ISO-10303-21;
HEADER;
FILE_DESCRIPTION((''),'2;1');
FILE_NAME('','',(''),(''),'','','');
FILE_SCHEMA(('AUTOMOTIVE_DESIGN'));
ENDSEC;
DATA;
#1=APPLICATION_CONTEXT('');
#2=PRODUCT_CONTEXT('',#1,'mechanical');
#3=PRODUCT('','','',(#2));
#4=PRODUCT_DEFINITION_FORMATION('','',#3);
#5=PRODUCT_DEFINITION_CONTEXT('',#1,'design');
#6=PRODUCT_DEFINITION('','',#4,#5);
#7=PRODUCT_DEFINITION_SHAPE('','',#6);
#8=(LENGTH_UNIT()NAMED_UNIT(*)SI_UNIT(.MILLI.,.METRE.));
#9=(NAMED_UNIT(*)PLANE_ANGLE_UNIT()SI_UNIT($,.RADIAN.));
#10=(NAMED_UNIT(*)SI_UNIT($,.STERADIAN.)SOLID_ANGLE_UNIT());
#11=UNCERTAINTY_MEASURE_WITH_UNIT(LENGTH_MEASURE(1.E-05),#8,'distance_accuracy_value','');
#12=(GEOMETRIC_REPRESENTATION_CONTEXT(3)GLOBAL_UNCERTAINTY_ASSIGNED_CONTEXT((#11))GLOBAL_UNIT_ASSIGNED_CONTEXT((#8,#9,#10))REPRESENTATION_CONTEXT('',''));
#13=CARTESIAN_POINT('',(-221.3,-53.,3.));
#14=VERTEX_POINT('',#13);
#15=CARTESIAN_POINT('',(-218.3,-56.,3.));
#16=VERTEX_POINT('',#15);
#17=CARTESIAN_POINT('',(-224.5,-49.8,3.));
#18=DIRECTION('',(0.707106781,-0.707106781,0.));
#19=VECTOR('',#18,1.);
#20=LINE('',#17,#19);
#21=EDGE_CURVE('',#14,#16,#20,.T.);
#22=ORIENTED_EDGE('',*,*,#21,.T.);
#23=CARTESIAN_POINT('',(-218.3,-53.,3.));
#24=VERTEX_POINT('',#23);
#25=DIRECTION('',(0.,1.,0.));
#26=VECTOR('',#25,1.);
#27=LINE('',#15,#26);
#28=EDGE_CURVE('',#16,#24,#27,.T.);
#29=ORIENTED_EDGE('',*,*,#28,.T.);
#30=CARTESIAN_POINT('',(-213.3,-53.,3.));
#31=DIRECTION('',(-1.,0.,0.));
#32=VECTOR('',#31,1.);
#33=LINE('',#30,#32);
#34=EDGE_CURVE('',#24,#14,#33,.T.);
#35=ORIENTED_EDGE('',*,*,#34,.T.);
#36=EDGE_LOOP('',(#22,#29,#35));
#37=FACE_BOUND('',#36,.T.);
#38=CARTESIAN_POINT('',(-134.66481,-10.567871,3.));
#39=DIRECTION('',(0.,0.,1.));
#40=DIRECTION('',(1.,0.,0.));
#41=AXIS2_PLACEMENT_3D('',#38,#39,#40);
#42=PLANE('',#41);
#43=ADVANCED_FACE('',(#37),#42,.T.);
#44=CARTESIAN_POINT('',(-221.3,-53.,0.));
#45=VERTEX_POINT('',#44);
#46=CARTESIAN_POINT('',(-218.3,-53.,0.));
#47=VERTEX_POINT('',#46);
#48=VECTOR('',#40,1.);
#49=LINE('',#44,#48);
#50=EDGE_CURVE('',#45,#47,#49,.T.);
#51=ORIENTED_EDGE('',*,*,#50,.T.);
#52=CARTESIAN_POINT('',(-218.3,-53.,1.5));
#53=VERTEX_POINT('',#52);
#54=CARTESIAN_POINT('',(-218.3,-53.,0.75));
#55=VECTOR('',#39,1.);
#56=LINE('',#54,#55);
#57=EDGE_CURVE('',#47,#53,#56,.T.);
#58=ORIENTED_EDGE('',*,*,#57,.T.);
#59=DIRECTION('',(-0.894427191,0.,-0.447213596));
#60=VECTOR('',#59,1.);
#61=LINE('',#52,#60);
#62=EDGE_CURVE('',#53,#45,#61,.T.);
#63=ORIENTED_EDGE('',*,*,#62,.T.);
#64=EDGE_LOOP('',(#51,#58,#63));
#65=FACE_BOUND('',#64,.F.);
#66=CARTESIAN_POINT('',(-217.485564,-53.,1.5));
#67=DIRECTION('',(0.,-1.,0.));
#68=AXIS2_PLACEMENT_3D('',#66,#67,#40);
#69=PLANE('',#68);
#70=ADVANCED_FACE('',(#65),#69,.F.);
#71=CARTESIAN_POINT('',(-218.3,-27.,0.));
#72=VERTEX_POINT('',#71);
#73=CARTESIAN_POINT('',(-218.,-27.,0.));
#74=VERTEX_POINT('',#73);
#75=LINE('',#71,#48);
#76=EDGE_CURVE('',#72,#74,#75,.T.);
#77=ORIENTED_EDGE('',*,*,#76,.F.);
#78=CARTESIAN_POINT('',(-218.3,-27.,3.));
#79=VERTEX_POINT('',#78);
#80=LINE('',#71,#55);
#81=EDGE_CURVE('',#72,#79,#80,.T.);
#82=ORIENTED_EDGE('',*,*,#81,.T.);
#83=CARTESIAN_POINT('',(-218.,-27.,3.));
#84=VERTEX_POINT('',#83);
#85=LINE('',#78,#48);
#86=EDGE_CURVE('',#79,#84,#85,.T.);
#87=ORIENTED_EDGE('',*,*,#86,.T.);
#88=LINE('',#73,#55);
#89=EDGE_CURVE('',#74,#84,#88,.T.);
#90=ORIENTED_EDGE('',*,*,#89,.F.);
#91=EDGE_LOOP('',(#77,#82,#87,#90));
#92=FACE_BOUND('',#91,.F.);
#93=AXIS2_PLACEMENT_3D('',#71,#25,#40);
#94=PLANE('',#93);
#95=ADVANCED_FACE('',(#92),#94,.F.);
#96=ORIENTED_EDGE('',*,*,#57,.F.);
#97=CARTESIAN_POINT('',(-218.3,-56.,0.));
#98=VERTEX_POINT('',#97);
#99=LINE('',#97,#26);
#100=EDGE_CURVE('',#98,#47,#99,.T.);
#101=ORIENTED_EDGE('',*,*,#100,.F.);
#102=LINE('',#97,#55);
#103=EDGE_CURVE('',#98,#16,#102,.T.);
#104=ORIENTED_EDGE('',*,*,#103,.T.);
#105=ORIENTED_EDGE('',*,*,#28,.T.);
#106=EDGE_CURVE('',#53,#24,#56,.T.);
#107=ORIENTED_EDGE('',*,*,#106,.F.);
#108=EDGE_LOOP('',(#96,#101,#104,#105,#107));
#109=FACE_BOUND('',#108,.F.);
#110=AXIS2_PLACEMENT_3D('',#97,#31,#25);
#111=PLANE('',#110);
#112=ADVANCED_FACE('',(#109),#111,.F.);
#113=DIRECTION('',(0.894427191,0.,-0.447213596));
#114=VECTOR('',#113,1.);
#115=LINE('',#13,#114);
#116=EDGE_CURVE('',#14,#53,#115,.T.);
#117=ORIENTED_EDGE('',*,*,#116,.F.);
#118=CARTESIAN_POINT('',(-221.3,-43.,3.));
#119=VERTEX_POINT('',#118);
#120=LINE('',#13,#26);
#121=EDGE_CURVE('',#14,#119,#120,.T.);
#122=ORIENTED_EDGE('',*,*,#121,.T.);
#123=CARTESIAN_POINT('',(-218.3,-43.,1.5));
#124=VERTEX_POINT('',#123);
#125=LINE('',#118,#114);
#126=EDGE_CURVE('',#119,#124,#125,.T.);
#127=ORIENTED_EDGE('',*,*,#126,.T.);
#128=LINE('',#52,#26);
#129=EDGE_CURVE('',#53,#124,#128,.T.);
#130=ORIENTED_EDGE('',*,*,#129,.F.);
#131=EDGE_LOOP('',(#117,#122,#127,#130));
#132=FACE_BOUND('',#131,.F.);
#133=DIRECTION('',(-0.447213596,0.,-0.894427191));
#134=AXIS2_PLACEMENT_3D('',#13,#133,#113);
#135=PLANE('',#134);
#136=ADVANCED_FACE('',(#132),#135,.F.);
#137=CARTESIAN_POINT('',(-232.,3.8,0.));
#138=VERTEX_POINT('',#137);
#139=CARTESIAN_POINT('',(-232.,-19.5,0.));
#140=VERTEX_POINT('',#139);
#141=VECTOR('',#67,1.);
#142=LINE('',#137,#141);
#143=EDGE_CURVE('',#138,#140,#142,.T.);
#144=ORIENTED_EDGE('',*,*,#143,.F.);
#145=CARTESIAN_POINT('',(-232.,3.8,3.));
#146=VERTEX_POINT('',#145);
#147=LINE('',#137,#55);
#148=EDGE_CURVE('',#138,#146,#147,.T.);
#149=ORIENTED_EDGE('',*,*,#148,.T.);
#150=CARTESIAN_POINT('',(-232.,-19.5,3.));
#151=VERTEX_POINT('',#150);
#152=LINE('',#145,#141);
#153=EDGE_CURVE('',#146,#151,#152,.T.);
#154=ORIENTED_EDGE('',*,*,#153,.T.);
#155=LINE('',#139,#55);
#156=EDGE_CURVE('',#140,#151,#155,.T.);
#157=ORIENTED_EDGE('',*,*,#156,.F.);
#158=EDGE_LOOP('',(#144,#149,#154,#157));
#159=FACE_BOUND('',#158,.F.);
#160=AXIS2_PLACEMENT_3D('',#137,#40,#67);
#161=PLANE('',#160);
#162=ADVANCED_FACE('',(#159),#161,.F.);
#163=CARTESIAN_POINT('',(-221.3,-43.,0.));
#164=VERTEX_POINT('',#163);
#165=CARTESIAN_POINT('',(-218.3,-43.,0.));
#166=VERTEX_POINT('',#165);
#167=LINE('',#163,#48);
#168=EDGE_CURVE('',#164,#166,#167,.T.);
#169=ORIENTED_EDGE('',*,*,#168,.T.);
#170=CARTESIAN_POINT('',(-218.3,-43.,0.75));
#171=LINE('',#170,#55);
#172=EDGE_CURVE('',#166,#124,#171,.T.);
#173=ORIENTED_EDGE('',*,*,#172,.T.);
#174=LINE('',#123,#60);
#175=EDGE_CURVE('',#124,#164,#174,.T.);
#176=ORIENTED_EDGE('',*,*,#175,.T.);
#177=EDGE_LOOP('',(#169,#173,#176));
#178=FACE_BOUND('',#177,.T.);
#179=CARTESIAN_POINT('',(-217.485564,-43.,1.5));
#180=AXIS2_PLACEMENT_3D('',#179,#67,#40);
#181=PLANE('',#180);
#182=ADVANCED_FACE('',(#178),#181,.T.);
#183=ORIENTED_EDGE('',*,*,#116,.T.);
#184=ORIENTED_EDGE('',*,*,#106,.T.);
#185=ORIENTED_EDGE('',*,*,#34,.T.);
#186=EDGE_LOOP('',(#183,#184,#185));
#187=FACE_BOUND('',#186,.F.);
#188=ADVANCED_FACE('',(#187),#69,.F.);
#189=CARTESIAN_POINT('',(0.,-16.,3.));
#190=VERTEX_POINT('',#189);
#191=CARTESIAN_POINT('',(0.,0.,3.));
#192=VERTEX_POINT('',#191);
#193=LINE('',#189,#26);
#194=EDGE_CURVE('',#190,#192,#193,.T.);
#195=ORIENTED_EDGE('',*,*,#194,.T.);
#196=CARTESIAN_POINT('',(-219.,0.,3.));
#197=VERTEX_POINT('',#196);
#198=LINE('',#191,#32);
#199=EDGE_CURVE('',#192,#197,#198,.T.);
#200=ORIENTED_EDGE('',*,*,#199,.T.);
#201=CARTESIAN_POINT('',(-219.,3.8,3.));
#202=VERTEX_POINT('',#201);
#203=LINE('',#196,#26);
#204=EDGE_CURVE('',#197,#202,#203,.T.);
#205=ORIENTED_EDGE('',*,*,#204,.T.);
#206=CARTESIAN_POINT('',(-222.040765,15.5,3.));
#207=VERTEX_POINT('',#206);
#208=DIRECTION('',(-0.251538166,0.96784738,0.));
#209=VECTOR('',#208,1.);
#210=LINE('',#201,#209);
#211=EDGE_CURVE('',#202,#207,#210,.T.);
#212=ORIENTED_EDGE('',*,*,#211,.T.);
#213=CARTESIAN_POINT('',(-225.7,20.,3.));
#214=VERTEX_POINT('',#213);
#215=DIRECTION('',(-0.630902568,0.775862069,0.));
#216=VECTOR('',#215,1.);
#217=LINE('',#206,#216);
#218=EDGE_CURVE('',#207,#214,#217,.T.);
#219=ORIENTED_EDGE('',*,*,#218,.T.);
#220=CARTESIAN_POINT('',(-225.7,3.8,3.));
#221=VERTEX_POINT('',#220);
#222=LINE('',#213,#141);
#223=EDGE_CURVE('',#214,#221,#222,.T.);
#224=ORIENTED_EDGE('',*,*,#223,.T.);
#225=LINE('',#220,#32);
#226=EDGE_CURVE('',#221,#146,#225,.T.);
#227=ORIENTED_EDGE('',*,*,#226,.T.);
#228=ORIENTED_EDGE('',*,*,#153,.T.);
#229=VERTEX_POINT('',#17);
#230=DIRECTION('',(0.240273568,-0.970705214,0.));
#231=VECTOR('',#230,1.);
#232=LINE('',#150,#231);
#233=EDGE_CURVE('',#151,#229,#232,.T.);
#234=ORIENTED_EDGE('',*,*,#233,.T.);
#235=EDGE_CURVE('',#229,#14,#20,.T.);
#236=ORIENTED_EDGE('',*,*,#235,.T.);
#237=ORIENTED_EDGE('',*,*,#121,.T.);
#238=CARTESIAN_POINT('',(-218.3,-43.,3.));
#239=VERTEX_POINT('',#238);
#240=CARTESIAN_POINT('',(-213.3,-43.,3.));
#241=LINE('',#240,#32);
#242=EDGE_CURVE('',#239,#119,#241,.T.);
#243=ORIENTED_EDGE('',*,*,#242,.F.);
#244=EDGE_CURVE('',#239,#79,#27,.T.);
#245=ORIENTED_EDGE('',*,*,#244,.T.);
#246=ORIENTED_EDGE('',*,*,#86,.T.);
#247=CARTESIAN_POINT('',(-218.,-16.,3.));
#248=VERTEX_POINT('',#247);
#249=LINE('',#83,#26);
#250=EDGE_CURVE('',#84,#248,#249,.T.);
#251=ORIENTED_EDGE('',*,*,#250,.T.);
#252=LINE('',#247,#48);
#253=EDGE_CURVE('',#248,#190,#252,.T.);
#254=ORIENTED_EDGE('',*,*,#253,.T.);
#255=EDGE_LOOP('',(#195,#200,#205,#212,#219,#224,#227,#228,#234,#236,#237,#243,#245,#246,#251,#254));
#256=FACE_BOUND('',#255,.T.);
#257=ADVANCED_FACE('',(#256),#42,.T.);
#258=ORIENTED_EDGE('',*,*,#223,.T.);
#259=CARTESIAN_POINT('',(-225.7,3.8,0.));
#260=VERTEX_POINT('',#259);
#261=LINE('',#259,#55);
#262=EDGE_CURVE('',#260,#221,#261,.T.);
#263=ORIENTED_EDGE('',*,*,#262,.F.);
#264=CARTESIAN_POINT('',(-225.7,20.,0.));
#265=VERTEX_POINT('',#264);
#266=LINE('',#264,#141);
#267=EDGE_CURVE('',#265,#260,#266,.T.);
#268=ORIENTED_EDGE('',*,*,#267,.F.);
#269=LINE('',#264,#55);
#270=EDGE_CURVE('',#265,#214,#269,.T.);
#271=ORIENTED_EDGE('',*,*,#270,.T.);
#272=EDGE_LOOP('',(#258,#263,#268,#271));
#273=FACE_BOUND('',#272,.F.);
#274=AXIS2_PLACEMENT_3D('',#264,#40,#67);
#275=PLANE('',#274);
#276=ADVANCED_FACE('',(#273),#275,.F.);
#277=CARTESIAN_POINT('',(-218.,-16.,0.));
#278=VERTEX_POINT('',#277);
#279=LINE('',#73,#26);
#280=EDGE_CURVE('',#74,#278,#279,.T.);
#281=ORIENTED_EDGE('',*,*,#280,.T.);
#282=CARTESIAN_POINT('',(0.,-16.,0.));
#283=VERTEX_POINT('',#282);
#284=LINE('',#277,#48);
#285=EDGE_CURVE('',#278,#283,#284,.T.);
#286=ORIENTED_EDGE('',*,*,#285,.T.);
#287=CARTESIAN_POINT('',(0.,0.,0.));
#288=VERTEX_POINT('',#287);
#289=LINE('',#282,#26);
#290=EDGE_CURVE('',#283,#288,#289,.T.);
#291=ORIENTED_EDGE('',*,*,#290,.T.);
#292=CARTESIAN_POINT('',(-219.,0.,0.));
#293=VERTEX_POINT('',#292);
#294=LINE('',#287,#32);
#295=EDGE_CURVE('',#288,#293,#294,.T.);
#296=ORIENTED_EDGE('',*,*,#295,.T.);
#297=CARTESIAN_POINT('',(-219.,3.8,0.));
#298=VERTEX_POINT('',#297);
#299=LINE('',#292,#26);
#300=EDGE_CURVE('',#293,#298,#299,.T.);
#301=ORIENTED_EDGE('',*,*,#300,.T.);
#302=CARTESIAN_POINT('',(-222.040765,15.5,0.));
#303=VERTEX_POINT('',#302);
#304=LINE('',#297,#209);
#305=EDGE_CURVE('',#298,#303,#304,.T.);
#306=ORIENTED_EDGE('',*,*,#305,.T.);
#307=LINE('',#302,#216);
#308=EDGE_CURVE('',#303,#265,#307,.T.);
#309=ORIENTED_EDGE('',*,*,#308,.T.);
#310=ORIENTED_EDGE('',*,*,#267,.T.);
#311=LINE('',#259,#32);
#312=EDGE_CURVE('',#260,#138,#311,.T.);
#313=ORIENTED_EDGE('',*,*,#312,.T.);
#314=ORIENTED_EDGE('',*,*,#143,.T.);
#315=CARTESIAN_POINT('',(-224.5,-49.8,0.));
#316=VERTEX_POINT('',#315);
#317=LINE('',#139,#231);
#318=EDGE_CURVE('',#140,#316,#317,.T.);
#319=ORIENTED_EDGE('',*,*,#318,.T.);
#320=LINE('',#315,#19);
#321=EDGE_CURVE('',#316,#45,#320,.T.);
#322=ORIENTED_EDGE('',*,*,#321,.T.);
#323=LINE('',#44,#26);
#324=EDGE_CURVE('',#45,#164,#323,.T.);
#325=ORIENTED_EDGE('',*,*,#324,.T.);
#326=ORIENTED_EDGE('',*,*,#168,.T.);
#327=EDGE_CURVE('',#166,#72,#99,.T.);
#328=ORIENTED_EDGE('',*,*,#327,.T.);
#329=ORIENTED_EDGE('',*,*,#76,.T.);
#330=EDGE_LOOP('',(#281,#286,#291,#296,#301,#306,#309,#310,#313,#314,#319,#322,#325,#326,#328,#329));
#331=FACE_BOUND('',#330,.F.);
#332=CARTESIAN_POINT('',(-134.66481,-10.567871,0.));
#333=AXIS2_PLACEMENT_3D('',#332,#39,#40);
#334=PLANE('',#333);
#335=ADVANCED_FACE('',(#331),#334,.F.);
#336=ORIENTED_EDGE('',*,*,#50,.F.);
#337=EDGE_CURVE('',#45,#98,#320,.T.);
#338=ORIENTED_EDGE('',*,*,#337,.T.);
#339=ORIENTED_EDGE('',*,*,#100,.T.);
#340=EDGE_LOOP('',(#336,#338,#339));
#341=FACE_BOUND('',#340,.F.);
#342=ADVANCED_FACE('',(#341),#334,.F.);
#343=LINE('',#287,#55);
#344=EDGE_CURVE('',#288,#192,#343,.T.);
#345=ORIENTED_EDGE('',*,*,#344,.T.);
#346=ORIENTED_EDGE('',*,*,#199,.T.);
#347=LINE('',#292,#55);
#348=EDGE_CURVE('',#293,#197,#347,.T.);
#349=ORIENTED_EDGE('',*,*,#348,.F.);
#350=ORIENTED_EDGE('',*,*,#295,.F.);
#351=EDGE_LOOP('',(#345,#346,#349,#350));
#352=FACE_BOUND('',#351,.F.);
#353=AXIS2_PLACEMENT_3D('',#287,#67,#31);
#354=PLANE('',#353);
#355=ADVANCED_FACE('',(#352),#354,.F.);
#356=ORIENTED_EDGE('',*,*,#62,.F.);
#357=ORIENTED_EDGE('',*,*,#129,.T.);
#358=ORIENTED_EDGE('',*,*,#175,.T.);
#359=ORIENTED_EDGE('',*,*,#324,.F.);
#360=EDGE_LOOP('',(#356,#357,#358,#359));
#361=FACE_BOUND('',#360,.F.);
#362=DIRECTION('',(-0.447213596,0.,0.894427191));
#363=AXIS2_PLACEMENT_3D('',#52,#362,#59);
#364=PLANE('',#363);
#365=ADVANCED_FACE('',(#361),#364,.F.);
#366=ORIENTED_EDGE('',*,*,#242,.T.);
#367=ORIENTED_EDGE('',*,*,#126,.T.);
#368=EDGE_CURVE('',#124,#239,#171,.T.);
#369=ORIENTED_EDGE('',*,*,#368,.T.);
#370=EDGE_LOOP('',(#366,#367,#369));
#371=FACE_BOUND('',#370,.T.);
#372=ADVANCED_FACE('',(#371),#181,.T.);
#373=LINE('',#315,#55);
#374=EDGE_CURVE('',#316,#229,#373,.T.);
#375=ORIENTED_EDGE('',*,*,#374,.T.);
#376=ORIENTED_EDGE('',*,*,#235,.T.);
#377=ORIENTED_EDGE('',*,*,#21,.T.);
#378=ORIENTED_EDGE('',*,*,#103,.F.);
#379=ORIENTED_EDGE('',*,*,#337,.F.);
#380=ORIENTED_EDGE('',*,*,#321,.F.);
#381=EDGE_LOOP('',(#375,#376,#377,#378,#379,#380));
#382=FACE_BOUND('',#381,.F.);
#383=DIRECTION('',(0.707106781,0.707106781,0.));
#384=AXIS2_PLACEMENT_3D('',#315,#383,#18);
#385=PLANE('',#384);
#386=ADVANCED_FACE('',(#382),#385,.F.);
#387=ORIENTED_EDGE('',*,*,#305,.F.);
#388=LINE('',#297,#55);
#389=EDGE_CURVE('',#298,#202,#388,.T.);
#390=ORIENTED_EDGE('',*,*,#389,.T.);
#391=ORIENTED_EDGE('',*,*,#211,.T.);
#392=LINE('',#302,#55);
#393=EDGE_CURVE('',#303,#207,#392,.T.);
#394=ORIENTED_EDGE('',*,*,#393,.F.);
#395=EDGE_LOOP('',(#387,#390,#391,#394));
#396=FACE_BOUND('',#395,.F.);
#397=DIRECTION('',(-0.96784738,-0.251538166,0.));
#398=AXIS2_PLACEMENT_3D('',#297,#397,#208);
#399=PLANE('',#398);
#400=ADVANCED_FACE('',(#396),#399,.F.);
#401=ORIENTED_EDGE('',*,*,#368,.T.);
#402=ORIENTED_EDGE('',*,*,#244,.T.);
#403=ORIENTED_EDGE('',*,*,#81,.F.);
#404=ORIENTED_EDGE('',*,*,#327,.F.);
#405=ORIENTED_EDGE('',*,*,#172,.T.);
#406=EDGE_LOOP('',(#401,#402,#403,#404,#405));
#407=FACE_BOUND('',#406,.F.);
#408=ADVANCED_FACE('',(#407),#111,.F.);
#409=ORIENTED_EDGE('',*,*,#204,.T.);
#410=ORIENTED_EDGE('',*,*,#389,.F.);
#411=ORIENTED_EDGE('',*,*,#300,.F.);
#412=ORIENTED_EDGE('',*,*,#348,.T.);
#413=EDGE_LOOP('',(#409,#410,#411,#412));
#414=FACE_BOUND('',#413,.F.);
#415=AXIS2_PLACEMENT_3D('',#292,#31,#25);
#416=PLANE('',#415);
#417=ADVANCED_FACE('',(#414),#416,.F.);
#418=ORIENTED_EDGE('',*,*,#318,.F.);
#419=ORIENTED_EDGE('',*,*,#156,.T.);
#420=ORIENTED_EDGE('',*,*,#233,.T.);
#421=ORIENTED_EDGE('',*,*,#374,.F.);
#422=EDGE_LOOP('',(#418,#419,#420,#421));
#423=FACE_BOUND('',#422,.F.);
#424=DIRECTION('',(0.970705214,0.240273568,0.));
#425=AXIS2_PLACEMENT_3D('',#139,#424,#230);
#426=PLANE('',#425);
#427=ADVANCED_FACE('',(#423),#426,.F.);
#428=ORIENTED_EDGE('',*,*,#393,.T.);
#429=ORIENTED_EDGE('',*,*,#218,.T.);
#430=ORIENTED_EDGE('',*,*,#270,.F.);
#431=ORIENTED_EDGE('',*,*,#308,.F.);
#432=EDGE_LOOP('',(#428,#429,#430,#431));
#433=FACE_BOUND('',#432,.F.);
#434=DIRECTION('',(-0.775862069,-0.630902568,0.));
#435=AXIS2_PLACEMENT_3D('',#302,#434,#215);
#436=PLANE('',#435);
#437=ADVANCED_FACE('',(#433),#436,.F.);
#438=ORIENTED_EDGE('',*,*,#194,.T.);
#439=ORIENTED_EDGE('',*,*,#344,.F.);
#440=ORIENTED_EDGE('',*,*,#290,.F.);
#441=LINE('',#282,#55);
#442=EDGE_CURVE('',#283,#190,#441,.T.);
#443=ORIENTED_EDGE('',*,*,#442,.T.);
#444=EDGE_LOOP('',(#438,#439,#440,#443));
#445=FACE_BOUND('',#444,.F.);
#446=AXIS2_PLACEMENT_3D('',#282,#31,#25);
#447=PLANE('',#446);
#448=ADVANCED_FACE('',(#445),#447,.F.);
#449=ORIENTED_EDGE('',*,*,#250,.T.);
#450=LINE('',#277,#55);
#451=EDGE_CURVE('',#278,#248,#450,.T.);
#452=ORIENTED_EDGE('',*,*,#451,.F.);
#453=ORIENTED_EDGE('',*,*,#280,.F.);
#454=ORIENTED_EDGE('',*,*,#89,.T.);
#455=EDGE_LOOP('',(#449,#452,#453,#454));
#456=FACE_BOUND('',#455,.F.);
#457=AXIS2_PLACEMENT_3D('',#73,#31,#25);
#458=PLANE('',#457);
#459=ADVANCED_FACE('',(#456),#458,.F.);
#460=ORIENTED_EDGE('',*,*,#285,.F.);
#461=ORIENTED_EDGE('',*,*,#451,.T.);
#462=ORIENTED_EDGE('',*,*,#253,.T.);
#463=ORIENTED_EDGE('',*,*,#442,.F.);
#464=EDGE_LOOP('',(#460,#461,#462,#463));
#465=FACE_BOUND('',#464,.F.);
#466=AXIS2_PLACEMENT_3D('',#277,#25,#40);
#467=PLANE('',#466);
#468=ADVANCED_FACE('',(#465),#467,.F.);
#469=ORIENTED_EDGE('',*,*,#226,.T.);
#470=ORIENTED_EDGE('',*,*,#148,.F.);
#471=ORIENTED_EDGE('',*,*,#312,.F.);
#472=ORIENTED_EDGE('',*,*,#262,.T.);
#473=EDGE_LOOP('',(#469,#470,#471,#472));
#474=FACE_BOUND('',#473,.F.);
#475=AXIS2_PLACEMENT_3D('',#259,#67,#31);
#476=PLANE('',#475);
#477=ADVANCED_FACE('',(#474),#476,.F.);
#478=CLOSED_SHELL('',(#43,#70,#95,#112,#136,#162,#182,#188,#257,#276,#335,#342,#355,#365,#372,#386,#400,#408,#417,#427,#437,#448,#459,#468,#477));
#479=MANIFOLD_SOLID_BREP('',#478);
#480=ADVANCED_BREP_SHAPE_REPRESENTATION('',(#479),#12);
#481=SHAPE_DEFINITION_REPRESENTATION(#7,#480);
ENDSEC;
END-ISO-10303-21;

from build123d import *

# Parameters (mm, degrees)
F1_DEPTH = 3
F4_DEPTH = 10


# Not quite as in the source:
# - a feature names something its author has since deleted; it is built from what else it names


with BuildPart() as f1:
    # F0 (on Top) → F1 (new body)
    with BuildSketch(Plane.XY):
        Polygon((0, -16), (0, 0), (-219, 0), (-219, 3.8), (-222.0407651073, 15.5), (-225.7, 20), (-225.7, 3.8), (-232, 3.8), (-232, -19.5), (-224.5, -49.8), (-218.3, -56), (-218.3, -27), (-218, -27), (-218, -16), align=None)
    extrude(amount=F1_DEPTH)

    # F3 (on offset) → F4 (cut)
    with BuildSketch(Plane.XZ.offset(53)):
        Polygon((-221.3, 3), (-218.3, 1.5), (-221.3, 0), (-213.3, 0), (-213.3, 3), align=None)
    extrude(amount=-F4_DEPTH, mode=Mode.SUBTRACT)


solid = f1.part
